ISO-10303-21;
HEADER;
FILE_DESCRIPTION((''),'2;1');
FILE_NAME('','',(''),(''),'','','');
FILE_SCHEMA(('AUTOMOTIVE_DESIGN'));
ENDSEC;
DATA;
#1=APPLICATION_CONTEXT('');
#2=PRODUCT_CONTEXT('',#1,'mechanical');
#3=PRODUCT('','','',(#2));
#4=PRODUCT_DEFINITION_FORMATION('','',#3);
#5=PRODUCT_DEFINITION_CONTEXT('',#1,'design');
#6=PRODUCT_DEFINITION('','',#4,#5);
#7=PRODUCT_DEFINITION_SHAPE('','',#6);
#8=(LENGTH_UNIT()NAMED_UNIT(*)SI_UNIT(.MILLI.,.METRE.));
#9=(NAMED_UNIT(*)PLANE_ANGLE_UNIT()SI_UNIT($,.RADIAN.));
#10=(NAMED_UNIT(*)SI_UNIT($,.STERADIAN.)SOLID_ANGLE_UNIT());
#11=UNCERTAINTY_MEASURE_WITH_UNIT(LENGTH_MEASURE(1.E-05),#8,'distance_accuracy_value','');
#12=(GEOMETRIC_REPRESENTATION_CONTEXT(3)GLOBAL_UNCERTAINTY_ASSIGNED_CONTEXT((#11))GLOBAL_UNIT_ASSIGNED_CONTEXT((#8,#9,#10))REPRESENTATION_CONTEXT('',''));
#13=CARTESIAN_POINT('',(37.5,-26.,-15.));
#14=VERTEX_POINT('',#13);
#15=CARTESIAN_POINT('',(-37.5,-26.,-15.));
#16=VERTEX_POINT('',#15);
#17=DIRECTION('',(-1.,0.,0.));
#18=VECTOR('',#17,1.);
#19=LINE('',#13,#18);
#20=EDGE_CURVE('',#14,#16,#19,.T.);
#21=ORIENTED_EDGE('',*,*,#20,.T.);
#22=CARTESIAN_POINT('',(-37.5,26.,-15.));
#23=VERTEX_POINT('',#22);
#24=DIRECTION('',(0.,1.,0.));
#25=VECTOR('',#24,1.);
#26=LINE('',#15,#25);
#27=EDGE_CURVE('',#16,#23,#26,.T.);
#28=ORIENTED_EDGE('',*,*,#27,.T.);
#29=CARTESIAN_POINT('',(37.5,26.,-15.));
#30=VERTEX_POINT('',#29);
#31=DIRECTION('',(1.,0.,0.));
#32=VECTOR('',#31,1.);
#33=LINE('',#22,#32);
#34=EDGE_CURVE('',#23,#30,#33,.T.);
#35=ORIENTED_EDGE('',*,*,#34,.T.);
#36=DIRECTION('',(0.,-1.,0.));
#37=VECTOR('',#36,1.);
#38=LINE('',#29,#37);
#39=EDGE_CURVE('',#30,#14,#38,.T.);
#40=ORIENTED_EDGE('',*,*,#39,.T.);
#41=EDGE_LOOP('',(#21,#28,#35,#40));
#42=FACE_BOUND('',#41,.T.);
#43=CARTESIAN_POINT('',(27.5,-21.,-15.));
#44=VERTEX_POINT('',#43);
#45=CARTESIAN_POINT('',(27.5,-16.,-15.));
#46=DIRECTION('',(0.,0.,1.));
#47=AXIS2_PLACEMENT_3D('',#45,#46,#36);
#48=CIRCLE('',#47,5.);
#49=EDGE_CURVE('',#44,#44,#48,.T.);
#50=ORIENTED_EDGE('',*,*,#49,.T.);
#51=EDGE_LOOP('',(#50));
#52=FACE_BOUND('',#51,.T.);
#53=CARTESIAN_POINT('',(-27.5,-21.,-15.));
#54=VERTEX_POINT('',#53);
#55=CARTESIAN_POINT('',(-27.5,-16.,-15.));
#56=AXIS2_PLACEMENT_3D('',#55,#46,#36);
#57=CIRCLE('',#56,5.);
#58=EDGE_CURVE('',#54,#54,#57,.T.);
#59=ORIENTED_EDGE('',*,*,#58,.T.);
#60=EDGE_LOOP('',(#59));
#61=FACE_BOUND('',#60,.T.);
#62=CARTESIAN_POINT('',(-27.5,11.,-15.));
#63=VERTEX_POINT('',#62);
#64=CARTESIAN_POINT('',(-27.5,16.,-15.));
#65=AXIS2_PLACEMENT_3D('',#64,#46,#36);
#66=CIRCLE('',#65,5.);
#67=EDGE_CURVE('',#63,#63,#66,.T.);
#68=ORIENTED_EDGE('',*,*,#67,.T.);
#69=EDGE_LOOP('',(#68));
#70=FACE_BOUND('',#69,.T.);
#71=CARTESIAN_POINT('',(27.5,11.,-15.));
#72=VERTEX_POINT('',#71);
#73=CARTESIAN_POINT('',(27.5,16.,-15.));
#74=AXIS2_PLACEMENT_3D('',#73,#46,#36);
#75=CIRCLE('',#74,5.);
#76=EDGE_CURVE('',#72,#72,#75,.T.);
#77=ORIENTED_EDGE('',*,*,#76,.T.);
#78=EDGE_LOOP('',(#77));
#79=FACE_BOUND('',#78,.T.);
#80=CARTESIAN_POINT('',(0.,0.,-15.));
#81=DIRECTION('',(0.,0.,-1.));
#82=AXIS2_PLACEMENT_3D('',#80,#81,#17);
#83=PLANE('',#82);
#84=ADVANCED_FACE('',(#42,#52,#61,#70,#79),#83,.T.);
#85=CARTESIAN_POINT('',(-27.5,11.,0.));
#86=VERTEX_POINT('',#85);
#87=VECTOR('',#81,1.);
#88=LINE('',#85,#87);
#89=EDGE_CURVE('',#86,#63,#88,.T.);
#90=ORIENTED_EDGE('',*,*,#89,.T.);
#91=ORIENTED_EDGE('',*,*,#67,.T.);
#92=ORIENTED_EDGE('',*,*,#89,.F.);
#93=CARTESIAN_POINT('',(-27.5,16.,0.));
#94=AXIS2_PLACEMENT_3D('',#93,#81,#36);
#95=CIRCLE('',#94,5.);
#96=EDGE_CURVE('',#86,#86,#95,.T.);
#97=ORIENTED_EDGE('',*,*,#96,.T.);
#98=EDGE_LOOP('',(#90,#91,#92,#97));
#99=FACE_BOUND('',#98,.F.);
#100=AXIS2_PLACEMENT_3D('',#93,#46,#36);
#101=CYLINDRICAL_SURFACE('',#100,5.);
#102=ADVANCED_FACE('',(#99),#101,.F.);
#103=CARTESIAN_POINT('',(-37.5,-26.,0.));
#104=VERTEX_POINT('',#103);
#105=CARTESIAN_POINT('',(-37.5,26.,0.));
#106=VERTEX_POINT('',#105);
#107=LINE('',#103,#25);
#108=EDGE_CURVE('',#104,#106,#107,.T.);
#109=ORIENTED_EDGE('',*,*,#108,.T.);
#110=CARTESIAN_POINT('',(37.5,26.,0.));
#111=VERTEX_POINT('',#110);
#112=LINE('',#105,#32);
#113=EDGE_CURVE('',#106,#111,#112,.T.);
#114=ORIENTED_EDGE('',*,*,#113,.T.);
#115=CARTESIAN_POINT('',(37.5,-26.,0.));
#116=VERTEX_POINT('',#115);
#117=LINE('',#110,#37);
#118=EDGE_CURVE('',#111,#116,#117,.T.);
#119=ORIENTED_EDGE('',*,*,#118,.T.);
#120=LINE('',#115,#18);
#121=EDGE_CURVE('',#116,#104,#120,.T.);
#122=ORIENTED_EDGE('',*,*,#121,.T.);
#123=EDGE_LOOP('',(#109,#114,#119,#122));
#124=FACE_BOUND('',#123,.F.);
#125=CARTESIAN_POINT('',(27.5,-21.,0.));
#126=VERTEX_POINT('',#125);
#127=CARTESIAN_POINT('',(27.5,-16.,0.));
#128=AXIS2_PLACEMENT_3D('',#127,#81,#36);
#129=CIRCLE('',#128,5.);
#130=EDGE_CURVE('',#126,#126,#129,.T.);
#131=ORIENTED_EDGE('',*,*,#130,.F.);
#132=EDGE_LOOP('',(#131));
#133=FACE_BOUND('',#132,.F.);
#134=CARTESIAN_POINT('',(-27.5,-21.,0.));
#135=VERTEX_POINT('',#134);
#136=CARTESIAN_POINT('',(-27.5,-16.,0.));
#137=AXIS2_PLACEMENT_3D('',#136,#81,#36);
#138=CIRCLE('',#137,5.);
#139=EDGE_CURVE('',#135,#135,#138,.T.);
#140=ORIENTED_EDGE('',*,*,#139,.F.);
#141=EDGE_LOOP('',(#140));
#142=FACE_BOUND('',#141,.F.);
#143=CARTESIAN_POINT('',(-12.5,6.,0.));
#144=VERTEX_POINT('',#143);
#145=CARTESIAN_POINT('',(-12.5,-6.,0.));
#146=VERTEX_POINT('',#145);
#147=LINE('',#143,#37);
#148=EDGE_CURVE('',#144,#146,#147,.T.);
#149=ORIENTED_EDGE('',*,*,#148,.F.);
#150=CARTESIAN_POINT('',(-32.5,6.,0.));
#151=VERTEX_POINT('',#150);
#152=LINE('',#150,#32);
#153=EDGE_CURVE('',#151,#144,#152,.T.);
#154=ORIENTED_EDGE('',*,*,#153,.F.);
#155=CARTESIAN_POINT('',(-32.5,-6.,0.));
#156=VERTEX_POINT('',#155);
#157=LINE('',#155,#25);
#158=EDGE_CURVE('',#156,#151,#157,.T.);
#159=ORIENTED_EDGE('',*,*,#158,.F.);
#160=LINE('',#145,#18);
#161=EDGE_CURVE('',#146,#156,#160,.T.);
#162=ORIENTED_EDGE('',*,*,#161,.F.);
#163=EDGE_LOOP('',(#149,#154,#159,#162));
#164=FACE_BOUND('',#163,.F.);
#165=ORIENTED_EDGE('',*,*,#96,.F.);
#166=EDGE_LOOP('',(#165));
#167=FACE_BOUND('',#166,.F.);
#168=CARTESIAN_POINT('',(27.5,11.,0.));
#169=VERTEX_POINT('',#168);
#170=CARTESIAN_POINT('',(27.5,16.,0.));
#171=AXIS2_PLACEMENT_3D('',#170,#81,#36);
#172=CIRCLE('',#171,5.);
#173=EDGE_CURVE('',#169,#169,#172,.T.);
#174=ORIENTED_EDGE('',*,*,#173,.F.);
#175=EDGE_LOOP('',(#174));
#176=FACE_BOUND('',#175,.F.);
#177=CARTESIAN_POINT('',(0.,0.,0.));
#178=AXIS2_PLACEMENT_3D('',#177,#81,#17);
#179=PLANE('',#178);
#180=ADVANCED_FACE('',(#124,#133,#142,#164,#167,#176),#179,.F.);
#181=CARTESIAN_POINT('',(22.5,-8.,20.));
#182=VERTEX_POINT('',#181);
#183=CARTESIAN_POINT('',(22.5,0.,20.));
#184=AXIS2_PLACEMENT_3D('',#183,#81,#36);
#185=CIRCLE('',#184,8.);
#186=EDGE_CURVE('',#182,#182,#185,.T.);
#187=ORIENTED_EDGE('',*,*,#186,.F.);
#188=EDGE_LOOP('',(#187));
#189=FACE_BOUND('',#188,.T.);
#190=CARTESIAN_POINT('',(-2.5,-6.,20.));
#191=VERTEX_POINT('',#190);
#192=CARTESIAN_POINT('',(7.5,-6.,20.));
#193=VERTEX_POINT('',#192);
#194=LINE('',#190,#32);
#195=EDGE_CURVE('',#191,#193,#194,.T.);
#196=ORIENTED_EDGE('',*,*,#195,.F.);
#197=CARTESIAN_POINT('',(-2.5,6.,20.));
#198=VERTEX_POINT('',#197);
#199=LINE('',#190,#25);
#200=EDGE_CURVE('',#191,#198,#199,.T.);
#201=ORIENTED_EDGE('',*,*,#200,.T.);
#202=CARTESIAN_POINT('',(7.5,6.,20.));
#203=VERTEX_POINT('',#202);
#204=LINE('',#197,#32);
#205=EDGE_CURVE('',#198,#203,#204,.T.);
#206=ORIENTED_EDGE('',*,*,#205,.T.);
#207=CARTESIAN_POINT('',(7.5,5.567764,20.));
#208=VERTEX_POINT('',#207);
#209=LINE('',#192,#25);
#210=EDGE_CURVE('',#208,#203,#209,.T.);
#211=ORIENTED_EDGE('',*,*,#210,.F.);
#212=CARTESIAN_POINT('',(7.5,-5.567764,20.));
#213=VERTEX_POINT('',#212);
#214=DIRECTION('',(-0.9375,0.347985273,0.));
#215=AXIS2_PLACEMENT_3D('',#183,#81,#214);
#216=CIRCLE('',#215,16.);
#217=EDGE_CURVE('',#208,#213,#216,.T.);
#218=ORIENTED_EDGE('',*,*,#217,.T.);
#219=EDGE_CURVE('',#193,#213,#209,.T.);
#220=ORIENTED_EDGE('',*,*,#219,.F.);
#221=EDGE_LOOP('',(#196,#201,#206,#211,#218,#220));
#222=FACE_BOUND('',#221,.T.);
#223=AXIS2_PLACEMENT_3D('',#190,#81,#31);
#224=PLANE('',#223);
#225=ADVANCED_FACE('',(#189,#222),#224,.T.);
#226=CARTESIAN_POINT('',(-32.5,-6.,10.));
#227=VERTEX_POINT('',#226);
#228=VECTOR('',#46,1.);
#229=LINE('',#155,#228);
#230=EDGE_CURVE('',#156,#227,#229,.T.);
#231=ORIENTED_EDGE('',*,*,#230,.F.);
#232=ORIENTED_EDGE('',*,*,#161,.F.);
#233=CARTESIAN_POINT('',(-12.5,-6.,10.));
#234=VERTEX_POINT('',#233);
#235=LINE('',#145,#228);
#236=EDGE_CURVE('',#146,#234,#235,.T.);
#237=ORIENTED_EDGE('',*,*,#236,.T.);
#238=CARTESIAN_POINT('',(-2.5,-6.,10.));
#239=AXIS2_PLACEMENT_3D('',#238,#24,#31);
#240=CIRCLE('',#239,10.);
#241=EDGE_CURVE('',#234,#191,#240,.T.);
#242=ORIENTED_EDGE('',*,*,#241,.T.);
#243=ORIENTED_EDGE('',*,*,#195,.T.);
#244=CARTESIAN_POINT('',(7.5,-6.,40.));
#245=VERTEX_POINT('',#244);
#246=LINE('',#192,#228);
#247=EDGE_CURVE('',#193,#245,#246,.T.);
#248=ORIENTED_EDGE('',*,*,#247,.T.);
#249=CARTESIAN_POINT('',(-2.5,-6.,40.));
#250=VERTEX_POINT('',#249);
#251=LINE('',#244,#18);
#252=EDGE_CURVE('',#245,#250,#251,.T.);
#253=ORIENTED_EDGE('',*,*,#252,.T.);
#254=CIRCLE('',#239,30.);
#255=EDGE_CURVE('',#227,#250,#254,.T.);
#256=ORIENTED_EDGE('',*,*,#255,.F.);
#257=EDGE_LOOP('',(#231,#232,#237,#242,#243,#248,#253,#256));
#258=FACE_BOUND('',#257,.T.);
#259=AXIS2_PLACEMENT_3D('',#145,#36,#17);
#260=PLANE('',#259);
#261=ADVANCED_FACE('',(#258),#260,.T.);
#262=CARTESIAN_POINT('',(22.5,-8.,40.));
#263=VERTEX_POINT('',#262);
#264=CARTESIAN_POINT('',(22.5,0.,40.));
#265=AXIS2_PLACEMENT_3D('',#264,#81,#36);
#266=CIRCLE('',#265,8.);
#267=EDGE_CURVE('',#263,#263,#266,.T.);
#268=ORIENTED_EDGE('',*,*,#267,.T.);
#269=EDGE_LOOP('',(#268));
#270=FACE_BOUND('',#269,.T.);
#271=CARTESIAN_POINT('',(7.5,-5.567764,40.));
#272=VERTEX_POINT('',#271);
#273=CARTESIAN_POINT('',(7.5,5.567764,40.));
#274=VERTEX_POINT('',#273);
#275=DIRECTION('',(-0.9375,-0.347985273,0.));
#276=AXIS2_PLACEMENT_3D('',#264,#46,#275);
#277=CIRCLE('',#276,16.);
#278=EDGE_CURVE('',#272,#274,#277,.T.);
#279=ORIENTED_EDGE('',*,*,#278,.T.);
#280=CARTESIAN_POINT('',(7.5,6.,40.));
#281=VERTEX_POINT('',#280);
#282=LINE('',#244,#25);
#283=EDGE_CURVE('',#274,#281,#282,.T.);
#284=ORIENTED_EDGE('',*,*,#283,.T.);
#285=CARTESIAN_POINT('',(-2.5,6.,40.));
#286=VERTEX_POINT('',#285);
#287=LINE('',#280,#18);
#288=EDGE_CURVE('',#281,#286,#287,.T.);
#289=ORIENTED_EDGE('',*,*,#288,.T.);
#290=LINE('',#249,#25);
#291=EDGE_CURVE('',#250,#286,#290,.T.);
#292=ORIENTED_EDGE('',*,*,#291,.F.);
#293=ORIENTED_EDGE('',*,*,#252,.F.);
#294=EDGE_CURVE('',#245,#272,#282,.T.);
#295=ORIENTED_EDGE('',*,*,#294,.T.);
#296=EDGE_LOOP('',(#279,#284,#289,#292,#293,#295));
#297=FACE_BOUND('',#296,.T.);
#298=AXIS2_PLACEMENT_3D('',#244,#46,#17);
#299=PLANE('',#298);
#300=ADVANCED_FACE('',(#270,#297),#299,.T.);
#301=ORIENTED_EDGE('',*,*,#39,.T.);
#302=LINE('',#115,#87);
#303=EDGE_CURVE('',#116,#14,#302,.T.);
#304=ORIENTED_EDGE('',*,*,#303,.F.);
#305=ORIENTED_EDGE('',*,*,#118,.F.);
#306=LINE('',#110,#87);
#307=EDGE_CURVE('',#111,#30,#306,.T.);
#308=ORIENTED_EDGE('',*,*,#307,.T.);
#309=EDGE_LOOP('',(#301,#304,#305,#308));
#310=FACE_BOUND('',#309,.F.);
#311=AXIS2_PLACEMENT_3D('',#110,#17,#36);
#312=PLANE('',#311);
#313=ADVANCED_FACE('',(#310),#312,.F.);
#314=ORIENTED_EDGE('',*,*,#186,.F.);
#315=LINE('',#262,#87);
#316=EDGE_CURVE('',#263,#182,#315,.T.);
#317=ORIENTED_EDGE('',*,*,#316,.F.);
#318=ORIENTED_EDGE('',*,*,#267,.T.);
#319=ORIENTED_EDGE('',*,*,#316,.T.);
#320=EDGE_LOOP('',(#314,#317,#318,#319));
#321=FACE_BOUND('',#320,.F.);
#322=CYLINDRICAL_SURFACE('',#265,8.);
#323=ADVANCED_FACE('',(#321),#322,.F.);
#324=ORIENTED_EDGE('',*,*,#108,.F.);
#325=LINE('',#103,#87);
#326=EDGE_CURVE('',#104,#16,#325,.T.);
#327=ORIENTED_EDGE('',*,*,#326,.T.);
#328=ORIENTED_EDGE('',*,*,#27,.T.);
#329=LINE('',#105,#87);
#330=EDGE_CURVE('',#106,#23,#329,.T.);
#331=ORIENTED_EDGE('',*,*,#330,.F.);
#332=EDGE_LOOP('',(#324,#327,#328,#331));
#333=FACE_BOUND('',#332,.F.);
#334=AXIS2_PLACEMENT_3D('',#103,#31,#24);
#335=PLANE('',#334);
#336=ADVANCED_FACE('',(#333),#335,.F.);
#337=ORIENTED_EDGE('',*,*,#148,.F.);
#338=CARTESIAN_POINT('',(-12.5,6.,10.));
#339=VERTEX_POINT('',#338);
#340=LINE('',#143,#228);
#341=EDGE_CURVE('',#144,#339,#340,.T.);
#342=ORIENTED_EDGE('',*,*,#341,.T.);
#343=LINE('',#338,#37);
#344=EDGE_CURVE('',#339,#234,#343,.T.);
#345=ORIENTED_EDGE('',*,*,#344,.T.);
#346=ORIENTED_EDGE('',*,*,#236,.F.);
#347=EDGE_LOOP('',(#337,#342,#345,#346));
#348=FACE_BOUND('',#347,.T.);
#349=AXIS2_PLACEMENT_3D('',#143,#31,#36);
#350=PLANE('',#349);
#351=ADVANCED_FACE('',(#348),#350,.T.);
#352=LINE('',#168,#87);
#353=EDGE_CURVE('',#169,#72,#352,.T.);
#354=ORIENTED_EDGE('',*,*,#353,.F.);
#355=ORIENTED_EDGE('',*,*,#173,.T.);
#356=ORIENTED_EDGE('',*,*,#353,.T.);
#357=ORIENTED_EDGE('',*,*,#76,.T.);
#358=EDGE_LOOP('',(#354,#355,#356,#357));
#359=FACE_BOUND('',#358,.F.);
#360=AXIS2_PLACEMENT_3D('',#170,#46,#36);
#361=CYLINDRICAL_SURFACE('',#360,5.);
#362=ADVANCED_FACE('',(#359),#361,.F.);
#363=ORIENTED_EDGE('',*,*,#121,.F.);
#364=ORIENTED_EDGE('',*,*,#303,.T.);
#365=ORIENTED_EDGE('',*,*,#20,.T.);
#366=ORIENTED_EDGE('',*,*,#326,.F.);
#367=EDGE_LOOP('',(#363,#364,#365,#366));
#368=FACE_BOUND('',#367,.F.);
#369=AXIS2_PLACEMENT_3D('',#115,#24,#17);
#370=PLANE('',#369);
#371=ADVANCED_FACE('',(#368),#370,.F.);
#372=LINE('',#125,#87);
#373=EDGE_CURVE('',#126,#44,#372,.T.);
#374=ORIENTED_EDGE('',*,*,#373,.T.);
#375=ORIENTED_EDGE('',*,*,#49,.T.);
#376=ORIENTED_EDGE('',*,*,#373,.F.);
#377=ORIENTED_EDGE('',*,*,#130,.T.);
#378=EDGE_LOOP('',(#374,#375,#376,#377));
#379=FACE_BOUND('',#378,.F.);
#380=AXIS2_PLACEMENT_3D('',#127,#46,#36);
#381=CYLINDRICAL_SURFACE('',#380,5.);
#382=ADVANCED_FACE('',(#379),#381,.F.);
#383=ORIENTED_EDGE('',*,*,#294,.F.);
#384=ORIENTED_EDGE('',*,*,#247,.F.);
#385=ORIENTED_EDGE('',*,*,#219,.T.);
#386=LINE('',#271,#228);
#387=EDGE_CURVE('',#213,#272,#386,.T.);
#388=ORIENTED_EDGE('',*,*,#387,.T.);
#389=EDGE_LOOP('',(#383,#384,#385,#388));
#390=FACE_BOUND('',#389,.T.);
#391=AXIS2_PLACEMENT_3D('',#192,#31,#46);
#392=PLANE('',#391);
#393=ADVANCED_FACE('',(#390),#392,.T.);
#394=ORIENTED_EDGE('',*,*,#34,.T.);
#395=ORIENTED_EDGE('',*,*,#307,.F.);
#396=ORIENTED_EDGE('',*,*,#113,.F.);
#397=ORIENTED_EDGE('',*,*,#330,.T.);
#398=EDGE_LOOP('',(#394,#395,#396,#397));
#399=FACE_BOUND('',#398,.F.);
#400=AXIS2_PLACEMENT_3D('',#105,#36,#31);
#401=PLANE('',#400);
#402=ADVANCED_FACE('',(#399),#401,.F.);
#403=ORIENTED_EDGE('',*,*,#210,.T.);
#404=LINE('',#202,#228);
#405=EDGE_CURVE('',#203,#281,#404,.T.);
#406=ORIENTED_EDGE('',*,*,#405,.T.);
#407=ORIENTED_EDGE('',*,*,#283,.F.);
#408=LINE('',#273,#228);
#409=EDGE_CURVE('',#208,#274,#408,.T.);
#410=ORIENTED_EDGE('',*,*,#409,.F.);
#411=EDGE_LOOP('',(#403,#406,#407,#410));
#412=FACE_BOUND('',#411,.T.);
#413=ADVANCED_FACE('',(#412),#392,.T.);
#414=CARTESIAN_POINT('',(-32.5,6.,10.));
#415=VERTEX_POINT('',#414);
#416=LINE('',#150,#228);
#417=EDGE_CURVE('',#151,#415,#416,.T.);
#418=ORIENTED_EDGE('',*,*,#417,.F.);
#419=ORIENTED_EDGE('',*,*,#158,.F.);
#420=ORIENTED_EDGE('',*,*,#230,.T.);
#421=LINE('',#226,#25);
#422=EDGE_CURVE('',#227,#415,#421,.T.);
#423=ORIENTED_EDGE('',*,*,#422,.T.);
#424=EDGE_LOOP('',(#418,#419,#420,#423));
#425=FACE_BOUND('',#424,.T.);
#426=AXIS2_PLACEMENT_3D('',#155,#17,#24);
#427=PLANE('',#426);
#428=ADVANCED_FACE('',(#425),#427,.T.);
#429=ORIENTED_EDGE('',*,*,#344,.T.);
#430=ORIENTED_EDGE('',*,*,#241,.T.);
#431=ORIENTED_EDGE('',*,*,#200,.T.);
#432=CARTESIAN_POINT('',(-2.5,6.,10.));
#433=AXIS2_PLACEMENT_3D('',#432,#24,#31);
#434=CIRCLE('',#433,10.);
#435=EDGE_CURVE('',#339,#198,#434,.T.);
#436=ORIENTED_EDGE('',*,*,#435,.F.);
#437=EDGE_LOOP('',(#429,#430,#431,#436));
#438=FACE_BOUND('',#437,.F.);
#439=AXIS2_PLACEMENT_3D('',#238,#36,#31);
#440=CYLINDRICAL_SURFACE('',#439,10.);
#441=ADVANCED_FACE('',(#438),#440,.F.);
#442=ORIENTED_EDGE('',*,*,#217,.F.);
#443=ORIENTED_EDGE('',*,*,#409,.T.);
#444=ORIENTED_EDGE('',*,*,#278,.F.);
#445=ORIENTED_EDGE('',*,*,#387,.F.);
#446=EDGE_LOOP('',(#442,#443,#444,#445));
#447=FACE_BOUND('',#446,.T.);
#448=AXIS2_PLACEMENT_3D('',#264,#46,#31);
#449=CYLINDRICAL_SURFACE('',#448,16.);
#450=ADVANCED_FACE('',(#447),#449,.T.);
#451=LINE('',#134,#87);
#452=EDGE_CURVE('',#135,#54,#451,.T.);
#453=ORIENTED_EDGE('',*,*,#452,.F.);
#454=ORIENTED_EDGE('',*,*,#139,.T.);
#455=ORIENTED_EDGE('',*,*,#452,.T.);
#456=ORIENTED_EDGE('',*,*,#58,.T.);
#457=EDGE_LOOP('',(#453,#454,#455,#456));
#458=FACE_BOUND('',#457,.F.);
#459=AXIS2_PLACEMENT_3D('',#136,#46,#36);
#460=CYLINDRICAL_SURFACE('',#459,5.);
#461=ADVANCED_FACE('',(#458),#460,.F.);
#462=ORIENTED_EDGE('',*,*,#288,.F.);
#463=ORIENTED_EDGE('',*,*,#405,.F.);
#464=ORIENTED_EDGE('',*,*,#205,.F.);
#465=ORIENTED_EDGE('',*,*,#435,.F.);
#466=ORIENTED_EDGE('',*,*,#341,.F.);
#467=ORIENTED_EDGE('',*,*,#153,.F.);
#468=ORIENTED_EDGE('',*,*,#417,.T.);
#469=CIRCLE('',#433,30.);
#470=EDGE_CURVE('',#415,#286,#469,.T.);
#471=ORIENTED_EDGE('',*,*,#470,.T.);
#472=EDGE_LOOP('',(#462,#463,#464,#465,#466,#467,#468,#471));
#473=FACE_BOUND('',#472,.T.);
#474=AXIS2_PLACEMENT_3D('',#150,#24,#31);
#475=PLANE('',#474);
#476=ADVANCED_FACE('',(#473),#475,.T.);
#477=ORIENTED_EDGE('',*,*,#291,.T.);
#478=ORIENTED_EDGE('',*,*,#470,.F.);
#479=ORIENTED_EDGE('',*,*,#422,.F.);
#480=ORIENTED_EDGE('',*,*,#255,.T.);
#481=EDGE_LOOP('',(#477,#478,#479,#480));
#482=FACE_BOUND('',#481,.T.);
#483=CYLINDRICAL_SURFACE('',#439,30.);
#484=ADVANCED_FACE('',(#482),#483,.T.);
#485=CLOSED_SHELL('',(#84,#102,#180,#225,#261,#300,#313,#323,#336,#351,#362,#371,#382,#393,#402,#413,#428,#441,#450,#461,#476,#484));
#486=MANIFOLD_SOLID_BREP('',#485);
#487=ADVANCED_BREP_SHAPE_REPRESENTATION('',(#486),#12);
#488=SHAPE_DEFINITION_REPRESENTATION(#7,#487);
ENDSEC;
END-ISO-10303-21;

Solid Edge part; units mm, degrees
sketch "Sketch1" plane through (37.5, -26, 0) normal (0, 0, -1) x (-1, 0, 0)
  line L0 (0, 52) -> (0, 0)
  line L1 (0, 0) -> (75, 0)
  line L2 (75, 0) -> (75, 52)
  line L3 (75, 52) -> (0, 52)
extrude "Protrusion1" add sketch "Sketch1" along normal blind 15
hole "Hole_1" at (-27.5, 16, 0) direction (0, 0, -1) diameter 10 end up to next
hole "Hole1" at (-27.5, -16, 0) direction (0, 0, -1) diameter 10 end up to next
hole "Hole2" at (27.5, 16, 0) direction (0, 0, -1) diameter 10 end up to next
hole "Hole3" at (27.5, -16, 0) direction (0, 0, -1) diameter 10 end up to next
sketch "Sketch2" plane through (0, 0, 0) normal (0, 0, 1) x (1, 0, 0)
  line L0 (-32.5, 6) -> (-12.5, 6)
  line L1 (-12.5, 6) -> (-12.5, -6)
  line L2 (-12.5, -6) -> (-32.5, -6)
  line L3 (-32.5, -6) -> (-32.5, 6)
extrude "ExtrudedProtrusion_2" add sketch "Sketch2" along normal blind 10
sketch "Sketch3" plane through (-22.5, -6, 5) normal (0, -1, 0) x (1, 0, 0)
  arc A0 (-10, 5) -> (20, 35) centre (20, 5) cw
  line L0 (20, 35) -> (20, 15)
  arc A1 (10, 5) -> (20, 15) centre (20, 5) cw
extrude "ExtrudedProtrusion_3" add sketch "Sketch3" against normal blind 12 material side at (-23.6778, -6, 31.1778)
sketch "Sketch4" plane through (-17.5, -6, 20) normal (0, -1, 0) x (1, 0, 0)
  line L0 (25, 0) -> (25, 20)
  line L1 (25, 20) -> (15, 20)
  line L2 (15, 20) -> (15, 0)
  line L3 (15, 0) -> (25, 0)
extrude "Protrusion2" add sketch "Sketch4" against normal up to vertex (12 mm away)
sketch "Sketch5" plane through (2.5, 0, 40) normal (0, 0, 1) x (1, 0, 0)
  circle A0 centre (20, 0) radius 16
extrude "ExtrudedProtrusion_5" add sketch "Sketch5" against normal blind 20
hole "Hole_12" at (22.5, 0, 40) direction (0, 0, -1) diameter 16 depth 20
